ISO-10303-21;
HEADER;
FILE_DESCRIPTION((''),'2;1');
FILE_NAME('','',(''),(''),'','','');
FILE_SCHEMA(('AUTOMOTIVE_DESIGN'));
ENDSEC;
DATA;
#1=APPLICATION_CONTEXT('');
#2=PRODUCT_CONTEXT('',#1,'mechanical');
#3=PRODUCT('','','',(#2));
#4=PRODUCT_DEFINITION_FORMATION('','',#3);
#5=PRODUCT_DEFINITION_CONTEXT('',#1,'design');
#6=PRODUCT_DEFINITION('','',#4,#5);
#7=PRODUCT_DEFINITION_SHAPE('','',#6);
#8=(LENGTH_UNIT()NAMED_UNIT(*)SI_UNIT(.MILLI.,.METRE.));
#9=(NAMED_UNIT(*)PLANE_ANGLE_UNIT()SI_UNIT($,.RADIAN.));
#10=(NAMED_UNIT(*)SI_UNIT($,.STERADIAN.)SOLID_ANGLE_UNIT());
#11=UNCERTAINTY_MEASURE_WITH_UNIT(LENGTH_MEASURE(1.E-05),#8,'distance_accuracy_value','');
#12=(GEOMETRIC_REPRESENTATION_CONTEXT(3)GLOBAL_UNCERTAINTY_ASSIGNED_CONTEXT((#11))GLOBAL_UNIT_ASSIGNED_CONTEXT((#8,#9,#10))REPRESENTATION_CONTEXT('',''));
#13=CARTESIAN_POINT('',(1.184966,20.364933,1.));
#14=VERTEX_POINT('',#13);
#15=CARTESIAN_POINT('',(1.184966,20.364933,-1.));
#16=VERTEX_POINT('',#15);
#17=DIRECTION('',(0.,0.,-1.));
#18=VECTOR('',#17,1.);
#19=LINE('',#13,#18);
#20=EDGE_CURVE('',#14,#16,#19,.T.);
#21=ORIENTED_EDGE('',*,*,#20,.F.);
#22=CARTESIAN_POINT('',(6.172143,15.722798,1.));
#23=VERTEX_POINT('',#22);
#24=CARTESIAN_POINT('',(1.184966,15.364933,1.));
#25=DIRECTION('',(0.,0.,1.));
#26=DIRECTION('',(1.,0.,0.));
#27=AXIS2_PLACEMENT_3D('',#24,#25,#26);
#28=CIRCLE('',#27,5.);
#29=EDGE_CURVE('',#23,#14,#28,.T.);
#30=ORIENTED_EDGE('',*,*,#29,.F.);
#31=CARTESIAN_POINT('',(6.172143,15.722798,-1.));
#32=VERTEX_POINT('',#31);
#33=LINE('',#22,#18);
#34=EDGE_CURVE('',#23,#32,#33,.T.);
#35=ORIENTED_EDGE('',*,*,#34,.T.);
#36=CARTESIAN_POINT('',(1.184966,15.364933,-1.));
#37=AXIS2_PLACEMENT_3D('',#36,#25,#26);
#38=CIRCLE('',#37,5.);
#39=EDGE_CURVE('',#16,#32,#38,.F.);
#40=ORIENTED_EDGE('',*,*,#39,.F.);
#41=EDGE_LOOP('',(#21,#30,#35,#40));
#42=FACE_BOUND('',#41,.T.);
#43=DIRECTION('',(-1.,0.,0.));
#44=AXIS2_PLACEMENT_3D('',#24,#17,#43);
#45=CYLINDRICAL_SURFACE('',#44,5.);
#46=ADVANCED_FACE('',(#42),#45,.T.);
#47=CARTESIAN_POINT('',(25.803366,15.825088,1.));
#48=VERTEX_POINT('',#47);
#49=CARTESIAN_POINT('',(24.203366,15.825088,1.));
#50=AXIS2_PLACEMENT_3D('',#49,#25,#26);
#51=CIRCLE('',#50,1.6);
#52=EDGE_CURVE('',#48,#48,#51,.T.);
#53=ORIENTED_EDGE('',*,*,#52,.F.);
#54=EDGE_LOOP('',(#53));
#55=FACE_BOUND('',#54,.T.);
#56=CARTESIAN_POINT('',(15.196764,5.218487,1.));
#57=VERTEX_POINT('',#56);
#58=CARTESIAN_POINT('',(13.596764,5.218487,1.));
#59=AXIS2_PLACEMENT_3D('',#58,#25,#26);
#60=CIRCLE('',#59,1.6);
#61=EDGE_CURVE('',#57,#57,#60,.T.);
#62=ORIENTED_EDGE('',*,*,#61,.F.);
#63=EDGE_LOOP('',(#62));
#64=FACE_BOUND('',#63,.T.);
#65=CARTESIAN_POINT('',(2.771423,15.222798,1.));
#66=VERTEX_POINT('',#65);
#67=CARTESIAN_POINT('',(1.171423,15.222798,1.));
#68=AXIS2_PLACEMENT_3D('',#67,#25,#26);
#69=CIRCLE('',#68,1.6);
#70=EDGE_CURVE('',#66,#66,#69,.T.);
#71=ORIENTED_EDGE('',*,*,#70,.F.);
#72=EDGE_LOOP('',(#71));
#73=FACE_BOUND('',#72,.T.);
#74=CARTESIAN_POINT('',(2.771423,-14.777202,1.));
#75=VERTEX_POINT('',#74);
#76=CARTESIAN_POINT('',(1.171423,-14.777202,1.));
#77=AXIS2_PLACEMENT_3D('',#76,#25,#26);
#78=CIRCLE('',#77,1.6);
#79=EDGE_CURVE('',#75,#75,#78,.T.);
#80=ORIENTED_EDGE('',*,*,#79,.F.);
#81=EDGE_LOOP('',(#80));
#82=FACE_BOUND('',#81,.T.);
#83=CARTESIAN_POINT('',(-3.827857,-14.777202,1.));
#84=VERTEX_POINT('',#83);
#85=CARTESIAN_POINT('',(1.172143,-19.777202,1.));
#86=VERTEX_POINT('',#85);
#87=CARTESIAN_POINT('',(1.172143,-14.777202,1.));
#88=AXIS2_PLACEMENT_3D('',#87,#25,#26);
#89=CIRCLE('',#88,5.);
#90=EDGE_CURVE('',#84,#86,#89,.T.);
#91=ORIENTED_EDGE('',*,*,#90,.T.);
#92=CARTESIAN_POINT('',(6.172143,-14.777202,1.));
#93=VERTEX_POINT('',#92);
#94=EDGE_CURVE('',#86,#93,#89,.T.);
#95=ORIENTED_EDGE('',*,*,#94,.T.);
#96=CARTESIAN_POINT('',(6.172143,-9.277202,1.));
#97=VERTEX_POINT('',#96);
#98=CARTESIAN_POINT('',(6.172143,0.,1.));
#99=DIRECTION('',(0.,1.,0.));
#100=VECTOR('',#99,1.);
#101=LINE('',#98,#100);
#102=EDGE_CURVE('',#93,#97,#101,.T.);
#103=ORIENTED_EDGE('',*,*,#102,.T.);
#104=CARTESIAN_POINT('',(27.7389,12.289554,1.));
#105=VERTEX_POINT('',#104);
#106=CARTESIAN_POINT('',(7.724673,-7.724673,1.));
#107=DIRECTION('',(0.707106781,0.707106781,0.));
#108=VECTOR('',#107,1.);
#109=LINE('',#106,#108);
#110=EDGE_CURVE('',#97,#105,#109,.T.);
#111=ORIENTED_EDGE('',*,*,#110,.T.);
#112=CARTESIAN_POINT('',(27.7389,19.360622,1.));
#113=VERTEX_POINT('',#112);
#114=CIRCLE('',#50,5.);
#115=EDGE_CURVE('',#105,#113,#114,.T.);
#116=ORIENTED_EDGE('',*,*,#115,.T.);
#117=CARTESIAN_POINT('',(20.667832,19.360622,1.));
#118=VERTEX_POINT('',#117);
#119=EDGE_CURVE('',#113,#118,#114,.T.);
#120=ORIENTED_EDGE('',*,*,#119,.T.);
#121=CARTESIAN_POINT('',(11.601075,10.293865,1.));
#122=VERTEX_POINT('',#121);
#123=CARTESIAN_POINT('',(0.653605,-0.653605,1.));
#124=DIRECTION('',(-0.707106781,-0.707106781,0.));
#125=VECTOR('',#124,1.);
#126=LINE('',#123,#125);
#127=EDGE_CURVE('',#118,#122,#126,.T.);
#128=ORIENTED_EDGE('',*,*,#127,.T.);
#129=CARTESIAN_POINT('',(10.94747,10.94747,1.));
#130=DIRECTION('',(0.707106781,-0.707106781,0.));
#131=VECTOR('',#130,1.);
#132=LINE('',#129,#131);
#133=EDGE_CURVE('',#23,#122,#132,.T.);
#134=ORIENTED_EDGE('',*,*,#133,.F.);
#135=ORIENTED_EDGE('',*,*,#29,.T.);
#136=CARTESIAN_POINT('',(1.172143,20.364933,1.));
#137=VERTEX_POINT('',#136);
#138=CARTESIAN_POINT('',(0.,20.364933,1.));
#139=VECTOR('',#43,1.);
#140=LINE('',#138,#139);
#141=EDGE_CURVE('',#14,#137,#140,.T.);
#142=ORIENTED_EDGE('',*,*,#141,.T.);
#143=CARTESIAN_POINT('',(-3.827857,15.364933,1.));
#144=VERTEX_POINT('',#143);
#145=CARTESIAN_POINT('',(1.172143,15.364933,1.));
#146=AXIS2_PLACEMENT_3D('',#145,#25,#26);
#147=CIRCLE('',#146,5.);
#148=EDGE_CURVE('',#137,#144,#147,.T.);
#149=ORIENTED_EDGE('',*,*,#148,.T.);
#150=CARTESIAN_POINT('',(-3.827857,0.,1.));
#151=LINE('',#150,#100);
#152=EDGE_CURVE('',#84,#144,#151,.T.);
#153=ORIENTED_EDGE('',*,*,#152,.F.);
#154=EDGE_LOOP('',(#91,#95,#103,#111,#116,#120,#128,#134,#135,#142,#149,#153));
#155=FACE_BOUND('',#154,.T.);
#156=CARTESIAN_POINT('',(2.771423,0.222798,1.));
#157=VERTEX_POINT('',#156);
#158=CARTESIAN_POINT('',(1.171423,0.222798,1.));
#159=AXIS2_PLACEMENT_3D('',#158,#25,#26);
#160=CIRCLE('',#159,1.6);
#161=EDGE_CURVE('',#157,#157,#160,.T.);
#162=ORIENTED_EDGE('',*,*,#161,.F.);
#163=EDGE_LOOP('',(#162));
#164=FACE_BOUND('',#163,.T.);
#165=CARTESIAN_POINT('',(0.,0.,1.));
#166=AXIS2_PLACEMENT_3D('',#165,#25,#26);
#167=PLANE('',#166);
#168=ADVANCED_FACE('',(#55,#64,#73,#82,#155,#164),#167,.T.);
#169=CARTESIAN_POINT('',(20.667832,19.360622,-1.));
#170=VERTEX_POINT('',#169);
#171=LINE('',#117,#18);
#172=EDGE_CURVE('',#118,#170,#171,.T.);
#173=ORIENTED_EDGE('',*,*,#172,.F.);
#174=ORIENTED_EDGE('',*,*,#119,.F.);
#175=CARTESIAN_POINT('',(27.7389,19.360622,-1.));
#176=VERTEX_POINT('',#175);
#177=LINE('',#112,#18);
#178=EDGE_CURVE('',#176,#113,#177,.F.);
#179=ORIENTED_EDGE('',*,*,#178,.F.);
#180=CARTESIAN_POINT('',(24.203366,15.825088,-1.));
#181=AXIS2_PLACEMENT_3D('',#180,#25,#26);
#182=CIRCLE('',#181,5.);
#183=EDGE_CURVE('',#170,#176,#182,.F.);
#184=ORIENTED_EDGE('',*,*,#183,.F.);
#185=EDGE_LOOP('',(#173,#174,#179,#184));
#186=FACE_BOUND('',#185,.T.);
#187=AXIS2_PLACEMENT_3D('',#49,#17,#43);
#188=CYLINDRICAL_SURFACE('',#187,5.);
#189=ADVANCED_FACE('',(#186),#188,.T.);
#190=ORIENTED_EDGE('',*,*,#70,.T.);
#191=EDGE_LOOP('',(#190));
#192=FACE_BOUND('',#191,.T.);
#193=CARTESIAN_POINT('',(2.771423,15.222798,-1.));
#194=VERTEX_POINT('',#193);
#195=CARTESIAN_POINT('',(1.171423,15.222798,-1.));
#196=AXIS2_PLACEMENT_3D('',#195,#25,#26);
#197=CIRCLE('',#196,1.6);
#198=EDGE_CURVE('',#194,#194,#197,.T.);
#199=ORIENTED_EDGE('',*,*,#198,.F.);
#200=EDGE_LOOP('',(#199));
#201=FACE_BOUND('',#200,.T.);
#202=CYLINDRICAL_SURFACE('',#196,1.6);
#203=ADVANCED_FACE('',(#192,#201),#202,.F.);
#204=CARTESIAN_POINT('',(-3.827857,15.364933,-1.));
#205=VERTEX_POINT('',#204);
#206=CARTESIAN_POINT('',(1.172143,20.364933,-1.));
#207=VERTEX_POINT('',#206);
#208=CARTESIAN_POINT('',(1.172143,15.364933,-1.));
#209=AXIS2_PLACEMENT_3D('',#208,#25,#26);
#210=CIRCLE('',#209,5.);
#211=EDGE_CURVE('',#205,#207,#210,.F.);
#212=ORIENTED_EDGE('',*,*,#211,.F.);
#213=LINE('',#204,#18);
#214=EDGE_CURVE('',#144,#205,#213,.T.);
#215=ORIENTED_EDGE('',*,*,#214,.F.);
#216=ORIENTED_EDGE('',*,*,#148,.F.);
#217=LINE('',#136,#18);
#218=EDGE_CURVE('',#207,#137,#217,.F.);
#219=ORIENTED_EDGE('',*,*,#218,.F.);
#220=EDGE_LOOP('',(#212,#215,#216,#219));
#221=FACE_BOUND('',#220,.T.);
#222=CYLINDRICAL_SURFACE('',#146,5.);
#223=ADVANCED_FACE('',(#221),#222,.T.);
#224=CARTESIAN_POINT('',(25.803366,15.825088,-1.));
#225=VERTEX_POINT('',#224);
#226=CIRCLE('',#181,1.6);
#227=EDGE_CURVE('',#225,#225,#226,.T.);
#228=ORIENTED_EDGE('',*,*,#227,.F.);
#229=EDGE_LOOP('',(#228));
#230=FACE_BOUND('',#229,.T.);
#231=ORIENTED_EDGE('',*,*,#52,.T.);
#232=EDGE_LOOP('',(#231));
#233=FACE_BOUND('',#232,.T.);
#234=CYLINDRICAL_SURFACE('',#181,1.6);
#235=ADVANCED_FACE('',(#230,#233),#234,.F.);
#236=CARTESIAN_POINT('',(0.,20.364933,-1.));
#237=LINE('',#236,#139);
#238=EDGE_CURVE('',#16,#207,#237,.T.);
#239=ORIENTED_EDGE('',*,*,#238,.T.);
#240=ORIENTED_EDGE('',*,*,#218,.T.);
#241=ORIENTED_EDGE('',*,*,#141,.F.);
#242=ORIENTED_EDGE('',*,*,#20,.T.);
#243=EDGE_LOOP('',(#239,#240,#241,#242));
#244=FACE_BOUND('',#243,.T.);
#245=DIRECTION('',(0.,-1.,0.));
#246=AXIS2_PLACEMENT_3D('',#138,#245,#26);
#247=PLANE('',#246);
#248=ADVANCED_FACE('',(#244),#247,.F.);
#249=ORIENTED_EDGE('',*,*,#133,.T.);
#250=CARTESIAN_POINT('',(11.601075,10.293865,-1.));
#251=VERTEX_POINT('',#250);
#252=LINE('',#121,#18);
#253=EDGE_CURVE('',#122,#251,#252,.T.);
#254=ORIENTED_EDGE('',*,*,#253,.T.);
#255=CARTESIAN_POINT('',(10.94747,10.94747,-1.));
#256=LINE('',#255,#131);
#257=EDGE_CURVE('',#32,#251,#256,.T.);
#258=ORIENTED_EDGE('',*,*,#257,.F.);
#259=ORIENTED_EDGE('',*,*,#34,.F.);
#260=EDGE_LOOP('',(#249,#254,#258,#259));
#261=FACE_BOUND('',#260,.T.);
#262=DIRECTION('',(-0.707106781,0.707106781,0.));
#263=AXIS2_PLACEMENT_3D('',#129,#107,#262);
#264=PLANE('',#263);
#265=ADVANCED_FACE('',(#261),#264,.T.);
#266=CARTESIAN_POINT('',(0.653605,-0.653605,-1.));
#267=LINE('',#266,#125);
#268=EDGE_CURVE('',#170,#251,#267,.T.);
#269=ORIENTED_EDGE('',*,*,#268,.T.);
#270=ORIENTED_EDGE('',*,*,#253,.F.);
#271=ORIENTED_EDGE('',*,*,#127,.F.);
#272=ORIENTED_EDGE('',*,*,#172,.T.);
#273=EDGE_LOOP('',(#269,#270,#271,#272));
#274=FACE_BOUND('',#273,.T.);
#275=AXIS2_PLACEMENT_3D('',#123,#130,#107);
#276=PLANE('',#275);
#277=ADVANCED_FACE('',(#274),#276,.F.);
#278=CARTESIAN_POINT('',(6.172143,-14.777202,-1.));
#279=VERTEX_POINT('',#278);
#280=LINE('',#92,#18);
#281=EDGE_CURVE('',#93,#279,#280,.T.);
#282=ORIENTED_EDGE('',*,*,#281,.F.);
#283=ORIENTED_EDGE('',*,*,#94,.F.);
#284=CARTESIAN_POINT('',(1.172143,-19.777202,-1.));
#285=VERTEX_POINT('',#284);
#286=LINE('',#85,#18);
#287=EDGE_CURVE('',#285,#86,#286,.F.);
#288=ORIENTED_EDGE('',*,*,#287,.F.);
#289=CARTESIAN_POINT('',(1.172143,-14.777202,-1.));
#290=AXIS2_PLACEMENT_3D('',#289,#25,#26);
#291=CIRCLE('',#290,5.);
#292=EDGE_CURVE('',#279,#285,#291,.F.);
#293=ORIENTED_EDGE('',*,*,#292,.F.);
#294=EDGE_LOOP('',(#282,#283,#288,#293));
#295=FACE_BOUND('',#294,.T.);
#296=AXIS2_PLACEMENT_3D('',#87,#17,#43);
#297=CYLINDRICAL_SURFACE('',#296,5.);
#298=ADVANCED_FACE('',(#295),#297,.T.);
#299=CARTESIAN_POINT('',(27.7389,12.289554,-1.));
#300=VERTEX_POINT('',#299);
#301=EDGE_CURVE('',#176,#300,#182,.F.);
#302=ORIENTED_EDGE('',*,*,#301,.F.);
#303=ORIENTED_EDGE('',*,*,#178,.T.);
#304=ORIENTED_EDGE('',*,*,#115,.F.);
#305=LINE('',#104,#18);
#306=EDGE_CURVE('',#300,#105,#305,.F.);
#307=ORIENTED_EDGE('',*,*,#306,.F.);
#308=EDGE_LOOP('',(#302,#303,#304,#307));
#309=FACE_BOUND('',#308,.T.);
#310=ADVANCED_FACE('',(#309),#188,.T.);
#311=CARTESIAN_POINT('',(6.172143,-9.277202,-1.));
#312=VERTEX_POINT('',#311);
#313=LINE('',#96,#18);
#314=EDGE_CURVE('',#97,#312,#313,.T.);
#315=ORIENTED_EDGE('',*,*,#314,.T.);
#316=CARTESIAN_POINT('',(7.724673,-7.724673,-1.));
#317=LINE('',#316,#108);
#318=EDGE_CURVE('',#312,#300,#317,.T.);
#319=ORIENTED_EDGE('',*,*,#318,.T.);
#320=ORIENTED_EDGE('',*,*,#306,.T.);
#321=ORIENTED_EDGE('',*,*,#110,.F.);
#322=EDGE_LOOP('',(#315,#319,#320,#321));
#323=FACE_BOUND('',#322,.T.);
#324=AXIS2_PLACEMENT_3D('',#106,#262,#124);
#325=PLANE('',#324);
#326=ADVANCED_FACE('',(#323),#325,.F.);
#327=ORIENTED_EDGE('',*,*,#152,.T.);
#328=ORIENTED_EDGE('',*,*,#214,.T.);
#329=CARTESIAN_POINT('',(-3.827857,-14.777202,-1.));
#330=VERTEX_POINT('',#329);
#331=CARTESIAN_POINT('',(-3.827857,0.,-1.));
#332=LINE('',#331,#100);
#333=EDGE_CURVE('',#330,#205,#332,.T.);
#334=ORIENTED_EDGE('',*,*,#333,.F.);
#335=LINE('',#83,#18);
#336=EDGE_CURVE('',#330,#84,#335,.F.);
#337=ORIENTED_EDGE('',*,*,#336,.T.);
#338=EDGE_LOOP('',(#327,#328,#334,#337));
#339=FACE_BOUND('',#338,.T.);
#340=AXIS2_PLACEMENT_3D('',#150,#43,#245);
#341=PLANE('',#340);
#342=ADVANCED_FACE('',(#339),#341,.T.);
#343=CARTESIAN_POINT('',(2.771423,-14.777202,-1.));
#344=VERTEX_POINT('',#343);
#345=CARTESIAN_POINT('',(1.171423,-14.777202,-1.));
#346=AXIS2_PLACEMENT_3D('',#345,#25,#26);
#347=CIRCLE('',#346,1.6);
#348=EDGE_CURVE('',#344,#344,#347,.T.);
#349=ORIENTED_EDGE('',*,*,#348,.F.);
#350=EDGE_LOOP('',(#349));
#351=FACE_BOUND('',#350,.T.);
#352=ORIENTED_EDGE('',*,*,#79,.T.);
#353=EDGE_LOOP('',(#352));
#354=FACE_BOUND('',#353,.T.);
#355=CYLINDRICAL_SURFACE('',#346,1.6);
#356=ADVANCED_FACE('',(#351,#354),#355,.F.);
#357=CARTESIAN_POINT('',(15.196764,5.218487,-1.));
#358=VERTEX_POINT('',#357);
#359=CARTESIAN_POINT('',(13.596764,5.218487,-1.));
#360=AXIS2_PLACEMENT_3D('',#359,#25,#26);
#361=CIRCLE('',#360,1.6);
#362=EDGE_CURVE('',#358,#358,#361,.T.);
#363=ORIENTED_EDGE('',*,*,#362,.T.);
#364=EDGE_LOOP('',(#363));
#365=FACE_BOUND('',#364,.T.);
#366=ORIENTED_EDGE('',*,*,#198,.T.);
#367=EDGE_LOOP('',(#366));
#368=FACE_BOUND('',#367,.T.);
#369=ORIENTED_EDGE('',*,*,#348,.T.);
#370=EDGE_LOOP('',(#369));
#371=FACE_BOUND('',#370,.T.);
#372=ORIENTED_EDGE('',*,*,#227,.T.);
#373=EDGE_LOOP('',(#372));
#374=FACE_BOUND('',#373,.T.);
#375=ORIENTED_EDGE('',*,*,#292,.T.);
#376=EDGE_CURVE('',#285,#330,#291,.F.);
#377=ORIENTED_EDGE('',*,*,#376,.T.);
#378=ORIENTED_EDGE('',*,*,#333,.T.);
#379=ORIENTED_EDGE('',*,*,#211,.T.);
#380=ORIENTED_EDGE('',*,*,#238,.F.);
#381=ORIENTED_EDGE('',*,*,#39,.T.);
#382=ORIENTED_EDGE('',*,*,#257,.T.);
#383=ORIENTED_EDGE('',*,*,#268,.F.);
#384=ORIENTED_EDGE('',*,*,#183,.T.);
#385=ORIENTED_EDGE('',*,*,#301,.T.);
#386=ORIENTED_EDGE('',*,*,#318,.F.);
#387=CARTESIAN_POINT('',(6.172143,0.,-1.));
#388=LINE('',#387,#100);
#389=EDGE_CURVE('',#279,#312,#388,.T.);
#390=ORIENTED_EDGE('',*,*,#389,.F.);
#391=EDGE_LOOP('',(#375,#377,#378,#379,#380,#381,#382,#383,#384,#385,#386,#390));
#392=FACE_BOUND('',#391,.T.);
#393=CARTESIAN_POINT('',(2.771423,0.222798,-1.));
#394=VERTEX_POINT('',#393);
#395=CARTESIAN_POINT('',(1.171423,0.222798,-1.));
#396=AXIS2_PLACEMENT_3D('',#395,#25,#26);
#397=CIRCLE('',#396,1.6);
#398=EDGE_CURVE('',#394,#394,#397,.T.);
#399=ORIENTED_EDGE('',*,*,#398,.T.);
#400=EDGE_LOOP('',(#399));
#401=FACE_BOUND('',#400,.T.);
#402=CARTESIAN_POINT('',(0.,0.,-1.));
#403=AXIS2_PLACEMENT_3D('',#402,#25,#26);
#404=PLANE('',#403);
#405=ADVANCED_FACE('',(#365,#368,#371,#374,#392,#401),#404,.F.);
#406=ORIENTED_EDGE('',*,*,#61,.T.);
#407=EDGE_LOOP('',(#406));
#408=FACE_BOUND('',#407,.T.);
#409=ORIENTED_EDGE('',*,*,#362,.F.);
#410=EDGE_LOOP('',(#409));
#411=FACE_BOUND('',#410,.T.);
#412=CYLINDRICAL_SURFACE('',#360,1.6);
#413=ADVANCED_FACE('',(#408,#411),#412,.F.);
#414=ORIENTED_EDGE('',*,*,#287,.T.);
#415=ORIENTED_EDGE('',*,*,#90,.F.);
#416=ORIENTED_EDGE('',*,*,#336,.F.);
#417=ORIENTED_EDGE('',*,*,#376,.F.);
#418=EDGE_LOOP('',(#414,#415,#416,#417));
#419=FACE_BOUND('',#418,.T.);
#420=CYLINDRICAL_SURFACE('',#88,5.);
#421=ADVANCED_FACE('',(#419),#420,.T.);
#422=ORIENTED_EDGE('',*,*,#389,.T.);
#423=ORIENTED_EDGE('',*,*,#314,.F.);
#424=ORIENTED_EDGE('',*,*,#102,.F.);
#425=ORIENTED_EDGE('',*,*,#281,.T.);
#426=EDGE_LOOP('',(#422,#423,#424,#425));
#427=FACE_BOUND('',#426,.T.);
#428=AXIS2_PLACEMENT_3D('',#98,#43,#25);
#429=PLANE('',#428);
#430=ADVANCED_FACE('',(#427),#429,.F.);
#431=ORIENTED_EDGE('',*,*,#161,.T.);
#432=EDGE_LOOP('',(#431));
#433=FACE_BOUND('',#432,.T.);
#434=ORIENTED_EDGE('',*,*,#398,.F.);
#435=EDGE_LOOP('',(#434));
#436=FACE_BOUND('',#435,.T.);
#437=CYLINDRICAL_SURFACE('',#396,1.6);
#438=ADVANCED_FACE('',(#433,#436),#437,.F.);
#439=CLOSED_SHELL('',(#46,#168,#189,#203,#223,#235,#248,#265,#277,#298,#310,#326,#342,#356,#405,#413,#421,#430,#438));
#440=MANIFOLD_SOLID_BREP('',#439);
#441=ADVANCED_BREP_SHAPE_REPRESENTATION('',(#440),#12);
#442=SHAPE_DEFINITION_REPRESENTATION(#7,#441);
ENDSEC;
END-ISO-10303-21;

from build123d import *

# Parameters (mm, degrees)
EXTRUDE_1_DEPTH     = 1
FILLET_1_R          = 5
SKETCH_2_R          = 1.6
CUT_EXTRUDE_1_DEPTH = 36.923820844


with BuildPart() as part:
    # ｽｹｯﾁ1 → ﾎﾞｽ - 押し出し1 (new, symmetric)
    with BuildSketch(Plane.XY):
        Polygon((-3.827856705, 20.364933264), (-3.827856705, -19.777202359), (6.172143295, -19.777202359), (6.172143295, -9.277202359), (31.274434027, 15.825088373), (24.203366215, 22.896156185), (11.601075483, 10.293865452), (6.172143295, 15.722797641), (6.172143295, 20.364933264), align=None)
    extrude(amount=EXTRUDE_1_DEPTH, both=True)

    # ﾌｨﾚｯﾄ1
    # the kernel refuses this fillet: 5 mm, written as the material it takes off along each edge
    with BuildSketch(Plane(origin=(24.203366215, 22.896156185, -13.5), x_dir=(-0.7071067811865422, -0.7071067811865529, 0), z_dir=(0, 0, 1)), Plane(origin=(-3.827856705, -19.777202359, -13.5), x_dir=(1, 0, 0), z_dir=(0, 0, 1)), Plane(origin=(6.172143295, -19.777202359, -13.5), x_dir=(0, 1, 0), z_dir=(0, 0, 1)), Plane(origin=(31.274434027, 15.825088373, -13.5), x_dir=(-0.7071067811865479, 0.7071067811865471, 0), z_dir=(0, 0, 1))) as fillet_1_piece_1:
        with BuildLine():
            CenterArc((FILLET_1_R, FILLET_1_R), FILLET_1_R, 180, 90)
            Line((0, FILLET_1_R), (-FILLET_1_R * 0.02, FILLET_1_R))
            Line((-FILLET_1_R * 0.02, FILLET_1_R), (-FILLET_1_R * 0.02, -FILLET_1_R * 0.02))
            Line((-FILLET_1_R * 0.02, -FILLET_1_R * 0.02), (FILLET_1_R, -FILLET_1_R * 0.02))
            Line((FILLET_1_R, -FILLET_1_R * 0.02), (FILLET_1_R, 0))
        make_face()
    extrude(amount=27, mode=Mode.SUBTRACT)
    with BuildSketch(Plane(origin=(-3.827856705, 20.364933264, -13.5), x_dir=(1, 0, 0), z_dir=(0, 0, 1))) as fillet_1_piece_2:
        with BuildLine():
            CenterArc((FILLET_1_R, -FILLET_1_R), FILLET_1_R, 90, 90)
            Line((0, -FILLET_1_R), (-FILLET_1_R * 0.02, -FILLET_1_R))
            Line((-FILLET_1_R * 0.02, -FILLET_1_R), (-FILLET_1_R * 0.02, FILLET_1_R * 0.02))
            Line((-FILLET_1_R * 0.02, FILLET_1_R * 0.02), (FILLET_1_R, FILLET_1_R * 0.02))
            Line((FILLET_1_R, FILLET_1_R * 0.02), (FILLET_1_R, 0))
        make_face()
    extrude(amount=27, mode=Mode.SUBTRACT)
    with BuildSketch(Plane(origin=(6.172143295, 20.364933264, 13.467942164), x_dir=(-1, 0, 0), z_dir=(0, 0, -1))) as fillet_1_piece_3:
        with BuildLine():
            CenterArc((4.987176866, -5), FILLET_1_R, 90, 85.895667026)
            Line((0, -4.642135624), (-0.099743537, -4.634978336))
            ThreePointArc((-0.099743537, -4.634978336), (-0.1, -2.321067812), (-0.1, 0))
            Line((-0.1, 0), (0, 0.1))
            Line((0, 0.1), (4.987176866, 0.1))
            Line((4.987176866, 0.1), (4.987176866, 0))
        make_face()
    extrude(amount=26.935884328, mode=Mode.SUBTRACT)

    # ｽｹｯﾁ2 → ｶｯﾄ - 押し出し1 (cut, through all)
    with BuildSketch(Plane.XY.offset(1)):
        with Locations((1.171422694, -14.777202359)):
            Circle(SKETCH_2_R)
        with Locations((13.596764497, 5.218486655)):
            Circle(SKETCH_2_R)
        with Locations((24.203366215, 15.825088373)):
            Circle(SKETCH_2_R)
        with Locations((1.171422694, 0.222797641)):
            Circle(SKETCH_2_R)
        with Locations((1.171422694, 15.222797641)):
            Circle(SKETCH_2_R)
    extrude(amount=-CUT_EXTRUDE_1_DEPTH, mode=Mode.SUBTRACT)


solid = part.part
